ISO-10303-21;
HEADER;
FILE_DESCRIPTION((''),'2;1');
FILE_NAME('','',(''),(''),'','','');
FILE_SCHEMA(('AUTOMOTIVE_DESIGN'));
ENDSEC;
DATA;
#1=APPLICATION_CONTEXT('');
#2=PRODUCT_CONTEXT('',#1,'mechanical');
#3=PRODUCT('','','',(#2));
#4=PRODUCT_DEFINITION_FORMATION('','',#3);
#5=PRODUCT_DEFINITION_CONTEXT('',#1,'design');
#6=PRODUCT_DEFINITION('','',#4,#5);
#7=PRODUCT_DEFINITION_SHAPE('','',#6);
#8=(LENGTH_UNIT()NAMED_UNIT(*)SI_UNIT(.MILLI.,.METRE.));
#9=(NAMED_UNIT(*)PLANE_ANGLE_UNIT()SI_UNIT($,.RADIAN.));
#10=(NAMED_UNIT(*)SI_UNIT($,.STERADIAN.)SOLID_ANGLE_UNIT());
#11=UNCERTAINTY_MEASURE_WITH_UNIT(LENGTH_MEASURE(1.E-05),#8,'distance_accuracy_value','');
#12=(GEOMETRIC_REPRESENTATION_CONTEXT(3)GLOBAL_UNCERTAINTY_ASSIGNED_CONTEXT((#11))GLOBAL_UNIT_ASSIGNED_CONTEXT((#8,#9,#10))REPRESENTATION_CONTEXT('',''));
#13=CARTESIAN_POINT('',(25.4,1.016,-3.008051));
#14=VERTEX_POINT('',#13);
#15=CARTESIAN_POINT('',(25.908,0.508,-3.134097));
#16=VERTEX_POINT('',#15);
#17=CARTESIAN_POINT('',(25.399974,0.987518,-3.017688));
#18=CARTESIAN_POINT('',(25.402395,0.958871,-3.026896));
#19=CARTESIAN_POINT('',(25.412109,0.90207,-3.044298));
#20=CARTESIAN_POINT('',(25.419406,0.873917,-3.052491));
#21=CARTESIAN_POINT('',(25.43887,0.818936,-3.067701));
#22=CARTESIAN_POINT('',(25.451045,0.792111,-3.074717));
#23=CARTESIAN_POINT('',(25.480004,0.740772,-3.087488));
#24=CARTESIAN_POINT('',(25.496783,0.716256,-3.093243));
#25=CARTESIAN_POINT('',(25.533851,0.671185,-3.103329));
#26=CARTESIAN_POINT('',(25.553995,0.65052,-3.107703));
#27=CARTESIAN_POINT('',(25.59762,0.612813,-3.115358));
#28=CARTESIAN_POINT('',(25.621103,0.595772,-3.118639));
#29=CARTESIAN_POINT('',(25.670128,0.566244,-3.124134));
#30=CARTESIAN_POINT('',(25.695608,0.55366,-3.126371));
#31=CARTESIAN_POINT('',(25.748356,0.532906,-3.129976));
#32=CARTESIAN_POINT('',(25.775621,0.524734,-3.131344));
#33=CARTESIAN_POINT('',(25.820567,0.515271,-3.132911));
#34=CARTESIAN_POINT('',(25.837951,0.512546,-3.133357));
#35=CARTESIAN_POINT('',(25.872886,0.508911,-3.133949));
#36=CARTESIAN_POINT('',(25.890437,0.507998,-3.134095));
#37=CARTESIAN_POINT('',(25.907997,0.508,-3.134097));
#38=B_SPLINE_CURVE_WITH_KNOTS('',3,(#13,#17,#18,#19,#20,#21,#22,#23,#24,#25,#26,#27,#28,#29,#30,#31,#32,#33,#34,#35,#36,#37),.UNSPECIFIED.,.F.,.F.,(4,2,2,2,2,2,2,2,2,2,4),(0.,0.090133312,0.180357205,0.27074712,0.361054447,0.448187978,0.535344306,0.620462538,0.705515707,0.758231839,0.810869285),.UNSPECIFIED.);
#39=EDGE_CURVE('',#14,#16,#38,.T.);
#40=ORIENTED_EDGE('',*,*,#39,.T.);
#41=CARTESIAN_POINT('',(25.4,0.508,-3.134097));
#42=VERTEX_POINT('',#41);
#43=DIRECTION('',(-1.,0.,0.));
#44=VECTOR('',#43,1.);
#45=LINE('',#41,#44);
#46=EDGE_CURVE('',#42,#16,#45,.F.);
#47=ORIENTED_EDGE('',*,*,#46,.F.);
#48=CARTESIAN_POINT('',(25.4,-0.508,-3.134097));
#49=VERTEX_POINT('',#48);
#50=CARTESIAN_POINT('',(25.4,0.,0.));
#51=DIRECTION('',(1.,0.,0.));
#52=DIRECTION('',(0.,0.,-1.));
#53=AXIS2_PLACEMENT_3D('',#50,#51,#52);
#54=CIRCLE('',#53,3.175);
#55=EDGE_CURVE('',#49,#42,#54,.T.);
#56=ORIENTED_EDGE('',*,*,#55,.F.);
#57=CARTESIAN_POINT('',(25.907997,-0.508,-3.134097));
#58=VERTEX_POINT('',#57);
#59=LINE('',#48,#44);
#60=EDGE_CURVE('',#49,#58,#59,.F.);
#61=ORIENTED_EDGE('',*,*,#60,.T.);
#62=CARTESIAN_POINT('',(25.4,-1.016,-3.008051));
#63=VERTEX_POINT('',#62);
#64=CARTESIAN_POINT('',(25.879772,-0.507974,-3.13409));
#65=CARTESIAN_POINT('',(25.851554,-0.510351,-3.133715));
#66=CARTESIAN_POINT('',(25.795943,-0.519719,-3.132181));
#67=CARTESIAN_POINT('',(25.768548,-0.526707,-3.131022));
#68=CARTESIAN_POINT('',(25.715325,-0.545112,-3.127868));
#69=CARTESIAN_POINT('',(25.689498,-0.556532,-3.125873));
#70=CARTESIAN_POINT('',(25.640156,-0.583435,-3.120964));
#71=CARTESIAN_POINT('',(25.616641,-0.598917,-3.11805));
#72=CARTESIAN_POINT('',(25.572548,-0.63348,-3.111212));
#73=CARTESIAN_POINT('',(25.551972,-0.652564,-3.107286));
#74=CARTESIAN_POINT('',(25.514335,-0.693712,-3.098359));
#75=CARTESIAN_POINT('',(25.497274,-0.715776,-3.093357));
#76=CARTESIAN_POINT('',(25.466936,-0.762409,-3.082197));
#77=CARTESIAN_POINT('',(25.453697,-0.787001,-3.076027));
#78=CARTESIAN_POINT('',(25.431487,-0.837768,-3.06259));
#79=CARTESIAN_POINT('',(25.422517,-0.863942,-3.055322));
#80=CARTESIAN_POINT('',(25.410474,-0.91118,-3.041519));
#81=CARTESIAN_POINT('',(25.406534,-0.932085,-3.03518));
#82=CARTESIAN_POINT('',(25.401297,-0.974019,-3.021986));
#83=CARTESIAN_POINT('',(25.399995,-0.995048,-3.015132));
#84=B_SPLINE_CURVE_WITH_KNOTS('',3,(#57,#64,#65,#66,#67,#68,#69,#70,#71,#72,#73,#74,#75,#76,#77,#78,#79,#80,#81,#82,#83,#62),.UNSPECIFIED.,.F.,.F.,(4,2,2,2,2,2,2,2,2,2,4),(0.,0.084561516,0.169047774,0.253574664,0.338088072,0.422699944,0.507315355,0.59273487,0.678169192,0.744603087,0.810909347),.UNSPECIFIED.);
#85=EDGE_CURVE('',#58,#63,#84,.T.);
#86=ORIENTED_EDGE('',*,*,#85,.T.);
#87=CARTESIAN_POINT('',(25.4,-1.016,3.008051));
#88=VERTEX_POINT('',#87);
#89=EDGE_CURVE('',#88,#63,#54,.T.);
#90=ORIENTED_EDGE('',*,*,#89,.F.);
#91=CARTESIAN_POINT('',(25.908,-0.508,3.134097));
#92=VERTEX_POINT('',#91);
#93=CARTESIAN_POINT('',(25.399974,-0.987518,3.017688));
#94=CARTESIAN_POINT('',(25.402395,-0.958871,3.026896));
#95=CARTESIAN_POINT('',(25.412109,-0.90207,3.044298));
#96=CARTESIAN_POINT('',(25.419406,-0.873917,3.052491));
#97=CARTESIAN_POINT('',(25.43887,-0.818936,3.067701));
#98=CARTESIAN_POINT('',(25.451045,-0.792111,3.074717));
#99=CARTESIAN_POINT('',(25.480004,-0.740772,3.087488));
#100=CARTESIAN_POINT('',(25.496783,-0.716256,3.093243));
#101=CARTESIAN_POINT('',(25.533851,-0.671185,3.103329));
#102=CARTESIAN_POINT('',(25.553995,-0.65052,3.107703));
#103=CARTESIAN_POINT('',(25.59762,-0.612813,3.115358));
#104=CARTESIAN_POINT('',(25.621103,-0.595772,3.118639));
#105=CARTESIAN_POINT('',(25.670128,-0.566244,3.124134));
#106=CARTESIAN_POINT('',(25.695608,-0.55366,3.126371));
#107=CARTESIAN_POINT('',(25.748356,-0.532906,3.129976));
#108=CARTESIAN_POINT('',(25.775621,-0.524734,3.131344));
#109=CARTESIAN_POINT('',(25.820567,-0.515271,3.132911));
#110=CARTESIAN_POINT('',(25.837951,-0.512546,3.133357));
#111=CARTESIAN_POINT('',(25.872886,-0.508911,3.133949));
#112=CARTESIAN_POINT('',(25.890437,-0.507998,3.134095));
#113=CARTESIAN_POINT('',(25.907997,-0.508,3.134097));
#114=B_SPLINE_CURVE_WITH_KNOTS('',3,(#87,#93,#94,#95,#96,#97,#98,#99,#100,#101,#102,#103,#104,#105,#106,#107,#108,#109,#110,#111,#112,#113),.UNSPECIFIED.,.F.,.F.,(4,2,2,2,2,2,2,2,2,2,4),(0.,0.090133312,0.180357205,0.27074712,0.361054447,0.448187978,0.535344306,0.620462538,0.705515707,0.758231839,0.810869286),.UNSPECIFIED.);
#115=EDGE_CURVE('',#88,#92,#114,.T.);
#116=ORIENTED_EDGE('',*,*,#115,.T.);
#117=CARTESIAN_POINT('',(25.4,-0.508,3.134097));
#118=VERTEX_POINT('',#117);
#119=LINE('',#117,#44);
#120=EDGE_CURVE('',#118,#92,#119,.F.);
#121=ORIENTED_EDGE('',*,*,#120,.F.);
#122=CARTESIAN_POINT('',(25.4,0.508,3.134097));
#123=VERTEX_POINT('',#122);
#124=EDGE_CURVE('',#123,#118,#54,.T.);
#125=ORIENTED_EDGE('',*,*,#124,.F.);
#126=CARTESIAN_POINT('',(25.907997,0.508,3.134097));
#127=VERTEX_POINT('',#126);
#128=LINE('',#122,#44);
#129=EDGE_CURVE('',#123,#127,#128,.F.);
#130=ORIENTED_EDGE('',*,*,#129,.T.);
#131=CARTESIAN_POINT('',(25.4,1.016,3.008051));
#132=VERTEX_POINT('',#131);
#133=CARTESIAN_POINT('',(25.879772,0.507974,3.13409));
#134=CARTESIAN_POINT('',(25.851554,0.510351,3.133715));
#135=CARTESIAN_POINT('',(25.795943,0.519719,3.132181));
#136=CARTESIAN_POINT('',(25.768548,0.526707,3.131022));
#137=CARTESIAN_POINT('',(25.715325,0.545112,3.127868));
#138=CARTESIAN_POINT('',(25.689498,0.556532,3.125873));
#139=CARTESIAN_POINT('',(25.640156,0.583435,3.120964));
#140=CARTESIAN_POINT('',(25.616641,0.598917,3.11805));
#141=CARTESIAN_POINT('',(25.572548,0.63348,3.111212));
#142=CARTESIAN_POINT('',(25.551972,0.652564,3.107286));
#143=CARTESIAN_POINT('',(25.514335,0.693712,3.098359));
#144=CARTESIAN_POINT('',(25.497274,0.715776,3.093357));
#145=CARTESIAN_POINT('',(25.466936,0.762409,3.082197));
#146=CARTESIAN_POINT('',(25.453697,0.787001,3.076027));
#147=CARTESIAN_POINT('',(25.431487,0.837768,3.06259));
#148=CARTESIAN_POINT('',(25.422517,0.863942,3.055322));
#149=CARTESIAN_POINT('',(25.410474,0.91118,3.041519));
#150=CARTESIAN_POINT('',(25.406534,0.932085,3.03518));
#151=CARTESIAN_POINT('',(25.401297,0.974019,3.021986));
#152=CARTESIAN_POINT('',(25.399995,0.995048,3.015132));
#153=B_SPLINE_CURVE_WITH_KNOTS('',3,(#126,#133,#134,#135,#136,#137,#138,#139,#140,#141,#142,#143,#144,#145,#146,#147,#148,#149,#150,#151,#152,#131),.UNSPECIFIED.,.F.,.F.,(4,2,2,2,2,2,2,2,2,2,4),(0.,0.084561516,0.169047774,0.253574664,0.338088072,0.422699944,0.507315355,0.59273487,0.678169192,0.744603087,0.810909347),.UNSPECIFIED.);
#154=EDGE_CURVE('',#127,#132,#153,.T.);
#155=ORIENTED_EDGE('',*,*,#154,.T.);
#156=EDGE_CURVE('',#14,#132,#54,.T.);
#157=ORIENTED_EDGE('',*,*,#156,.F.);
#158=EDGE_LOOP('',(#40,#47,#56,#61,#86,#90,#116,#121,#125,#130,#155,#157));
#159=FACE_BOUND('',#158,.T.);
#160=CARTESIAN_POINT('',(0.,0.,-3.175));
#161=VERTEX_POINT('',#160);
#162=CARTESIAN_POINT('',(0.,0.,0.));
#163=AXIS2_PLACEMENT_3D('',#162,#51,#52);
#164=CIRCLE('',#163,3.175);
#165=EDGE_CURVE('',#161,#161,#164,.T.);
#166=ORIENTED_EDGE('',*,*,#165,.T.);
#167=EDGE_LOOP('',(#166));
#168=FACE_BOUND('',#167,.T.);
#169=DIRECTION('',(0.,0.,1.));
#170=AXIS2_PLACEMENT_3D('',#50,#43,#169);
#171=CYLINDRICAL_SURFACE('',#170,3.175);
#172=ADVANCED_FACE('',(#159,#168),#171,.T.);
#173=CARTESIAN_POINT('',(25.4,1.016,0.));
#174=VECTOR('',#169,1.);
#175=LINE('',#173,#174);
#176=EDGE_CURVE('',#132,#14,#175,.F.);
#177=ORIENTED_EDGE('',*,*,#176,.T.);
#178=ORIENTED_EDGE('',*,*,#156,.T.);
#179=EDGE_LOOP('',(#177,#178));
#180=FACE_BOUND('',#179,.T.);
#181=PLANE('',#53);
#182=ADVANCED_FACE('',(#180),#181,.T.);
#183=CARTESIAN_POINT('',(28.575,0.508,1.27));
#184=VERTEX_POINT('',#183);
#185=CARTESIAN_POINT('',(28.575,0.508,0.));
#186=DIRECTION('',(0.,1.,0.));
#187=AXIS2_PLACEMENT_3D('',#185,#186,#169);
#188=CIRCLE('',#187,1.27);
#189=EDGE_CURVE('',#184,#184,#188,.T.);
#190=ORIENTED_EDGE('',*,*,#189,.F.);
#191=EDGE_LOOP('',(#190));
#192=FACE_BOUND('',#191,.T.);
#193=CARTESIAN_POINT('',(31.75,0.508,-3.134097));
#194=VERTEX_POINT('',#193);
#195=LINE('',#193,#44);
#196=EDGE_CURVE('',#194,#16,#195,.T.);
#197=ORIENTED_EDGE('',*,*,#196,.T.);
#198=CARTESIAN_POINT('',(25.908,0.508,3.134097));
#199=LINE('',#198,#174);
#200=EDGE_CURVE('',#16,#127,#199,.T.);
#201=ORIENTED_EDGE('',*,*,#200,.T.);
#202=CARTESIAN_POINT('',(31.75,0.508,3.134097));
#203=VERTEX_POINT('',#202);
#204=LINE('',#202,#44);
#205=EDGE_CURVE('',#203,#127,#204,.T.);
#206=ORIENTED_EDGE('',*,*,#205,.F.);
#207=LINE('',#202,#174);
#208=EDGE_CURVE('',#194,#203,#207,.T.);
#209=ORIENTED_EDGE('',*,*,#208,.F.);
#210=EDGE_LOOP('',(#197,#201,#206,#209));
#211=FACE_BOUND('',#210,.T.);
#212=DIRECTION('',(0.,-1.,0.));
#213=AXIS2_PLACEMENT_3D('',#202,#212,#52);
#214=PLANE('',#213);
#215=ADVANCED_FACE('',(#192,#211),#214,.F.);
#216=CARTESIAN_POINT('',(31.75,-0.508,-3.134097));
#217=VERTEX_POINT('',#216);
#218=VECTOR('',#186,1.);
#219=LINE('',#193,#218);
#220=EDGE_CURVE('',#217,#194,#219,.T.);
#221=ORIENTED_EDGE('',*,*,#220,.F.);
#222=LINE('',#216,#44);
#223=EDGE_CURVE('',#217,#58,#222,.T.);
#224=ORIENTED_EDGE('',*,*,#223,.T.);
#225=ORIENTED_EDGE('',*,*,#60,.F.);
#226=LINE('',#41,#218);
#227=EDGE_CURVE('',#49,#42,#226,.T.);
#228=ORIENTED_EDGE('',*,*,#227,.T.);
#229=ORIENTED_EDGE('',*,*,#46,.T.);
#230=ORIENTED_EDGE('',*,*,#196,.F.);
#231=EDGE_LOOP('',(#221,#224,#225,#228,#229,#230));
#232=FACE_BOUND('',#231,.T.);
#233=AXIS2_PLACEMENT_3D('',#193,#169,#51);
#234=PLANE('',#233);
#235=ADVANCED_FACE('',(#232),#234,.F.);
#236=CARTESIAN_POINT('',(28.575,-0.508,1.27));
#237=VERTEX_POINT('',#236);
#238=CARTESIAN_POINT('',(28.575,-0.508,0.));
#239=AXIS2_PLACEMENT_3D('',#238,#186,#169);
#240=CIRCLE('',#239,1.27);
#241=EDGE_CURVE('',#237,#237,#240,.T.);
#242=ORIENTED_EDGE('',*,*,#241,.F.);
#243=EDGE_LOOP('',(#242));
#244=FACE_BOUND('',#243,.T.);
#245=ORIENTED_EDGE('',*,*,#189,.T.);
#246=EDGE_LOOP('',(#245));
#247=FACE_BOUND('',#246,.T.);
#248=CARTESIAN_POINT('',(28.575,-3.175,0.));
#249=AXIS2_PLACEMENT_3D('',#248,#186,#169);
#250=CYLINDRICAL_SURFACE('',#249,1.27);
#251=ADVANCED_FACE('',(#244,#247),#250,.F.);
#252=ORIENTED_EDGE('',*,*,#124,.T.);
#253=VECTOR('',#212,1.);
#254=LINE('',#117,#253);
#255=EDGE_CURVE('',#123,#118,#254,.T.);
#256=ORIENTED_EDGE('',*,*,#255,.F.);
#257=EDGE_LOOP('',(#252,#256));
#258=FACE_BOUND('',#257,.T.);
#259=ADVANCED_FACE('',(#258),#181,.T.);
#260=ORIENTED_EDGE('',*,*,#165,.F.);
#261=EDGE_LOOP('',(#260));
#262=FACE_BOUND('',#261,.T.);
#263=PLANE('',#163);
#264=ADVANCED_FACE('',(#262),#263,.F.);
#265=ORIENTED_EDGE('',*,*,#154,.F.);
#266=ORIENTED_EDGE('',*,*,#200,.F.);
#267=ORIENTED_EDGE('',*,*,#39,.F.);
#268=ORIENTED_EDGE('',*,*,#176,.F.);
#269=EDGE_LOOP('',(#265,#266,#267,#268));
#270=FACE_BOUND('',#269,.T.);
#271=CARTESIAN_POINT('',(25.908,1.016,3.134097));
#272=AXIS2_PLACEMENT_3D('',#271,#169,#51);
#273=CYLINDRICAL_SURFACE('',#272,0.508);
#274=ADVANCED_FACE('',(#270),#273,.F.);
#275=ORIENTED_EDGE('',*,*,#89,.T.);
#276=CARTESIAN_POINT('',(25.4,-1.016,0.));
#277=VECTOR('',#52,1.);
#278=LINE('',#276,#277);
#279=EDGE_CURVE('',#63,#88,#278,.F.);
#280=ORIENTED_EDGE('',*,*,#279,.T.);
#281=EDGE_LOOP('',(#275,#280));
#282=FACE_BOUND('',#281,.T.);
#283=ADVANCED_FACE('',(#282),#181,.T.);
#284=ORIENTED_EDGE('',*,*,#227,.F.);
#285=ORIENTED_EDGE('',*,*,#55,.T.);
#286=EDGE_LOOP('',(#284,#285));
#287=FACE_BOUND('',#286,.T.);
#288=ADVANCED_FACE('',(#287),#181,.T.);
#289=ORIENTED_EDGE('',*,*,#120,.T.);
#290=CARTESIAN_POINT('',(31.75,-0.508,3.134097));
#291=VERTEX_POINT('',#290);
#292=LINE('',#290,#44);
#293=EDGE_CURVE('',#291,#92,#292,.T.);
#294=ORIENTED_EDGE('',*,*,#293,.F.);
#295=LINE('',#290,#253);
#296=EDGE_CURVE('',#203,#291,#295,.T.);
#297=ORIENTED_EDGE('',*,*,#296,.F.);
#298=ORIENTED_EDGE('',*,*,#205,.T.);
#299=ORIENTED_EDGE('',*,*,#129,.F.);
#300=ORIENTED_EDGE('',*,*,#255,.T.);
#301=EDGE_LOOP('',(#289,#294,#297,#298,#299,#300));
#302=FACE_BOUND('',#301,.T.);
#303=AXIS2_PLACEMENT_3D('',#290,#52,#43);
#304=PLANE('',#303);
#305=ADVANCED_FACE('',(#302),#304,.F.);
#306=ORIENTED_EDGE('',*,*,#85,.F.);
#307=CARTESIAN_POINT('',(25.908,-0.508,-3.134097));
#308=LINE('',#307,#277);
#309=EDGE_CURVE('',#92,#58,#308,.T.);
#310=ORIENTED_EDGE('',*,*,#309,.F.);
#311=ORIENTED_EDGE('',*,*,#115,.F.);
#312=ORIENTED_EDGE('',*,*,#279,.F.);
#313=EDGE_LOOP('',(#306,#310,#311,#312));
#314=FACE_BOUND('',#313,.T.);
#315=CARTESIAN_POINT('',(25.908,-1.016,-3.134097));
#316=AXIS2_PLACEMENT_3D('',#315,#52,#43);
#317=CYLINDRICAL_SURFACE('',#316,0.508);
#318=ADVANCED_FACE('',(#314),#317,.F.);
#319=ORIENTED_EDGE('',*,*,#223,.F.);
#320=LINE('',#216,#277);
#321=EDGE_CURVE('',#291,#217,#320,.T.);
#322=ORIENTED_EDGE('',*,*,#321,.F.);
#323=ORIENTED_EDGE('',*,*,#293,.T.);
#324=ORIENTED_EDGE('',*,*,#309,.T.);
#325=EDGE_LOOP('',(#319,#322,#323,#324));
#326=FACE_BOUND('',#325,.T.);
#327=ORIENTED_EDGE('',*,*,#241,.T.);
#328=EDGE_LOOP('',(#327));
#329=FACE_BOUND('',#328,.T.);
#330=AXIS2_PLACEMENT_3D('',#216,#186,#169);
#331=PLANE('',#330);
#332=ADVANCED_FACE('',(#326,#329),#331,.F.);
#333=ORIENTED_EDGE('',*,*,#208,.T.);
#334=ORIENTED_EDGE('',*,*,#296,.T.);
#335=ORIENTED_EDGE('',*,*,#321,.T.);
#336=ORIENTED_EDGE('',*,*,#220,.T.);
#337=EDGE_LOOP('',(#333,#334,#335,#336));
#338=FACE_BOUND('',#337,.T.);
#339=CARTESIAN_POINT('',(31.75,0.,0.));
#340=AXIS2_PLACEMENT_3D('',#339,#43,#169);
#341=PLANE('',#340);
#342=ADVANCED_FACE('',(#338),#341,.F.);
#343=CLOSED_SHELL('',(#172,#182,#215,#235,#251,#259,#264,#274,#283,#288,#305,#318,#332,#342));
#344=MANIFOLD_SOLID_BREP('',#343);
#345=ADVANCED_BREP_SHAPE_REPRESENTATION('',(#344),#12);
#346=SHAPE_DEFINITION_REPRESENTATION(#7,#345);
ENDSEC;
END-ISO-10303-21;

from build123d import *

# Parameters (mm, degrees)
SKETCH1_R           = 3.175
BOSS_EXTRUDE1_DEPTH = 25.4
SKETCH2_W           = 6.268193042
SKETCH2_H           = 1.016
BOSS_EXTRUDE2_DEPTH = 6.35
SKETCH3_R           = 1.27
CUT_EXTRUDE1_DEPTH  = 33.120205697
FILLET1_R           = 0.508


with BuildPart() as part:
    # Sketch1 → Boss-Extrude1 (new body)
    with BuildSketch(Plane(origin=(0, 0, 0), x_dir=(0, 0, -1), z_dir=(1, 0, 0))):
        Circle(SKETCH1_R)
    extrude(amount=BOSS_EXTRUDE1_DEPTH)

    # Sketch2 → Boss-Extrude2 (add)
    with BuildSketch(Plane(origin=(25.4, 0, 0), x_dir=(0, 0, -1), z_dir=(1, 0, 0))):
        Rectangle(SKETCH2_W, SKETCH2_H)
    extrude(amount=BOSS_EXTRUDE2_DEPTH)

    # Sketch3 → Cut-Extrude1 (cut, through all)
    with BuildSketch(Plane(origin=(0, 0.508, 0), x_dir=(1, 0, 0), z_dir=(0, 1, 0))):
        with Locations(Location((28.575, 0, 0), (0, 0, 270))):
            Circle(SKETCH3_R)
    extrude(amount=-CUT_EXTRUDE1_DEPTH, mode=Mode.SUBTRACT)

    # Fillet1
    # the kernel refuses this fillet: 0.508 mm, written as the material it adds along each edge
    with BuildSketch(Plane(origin=(25.4, -0.508, -3.134096521), x_dir=(0, -1, 0), z_dir=(0, 0, 1))) as fillet1_piece_1_section:
        with BuildLine():
            CenterArc((FILLET1_R, FILLET1_R), FILLET1_R, 180, 90)
            Line((0, FILLET1_R), (0, 0))
            Line((0, 0), (FILLET1_R, 0))
        make_face()
    fillet1_piece_1 = extrude(amount=6.268193041, mode=Mode.PRIVATE)
    fillet1_piece_1 = fillet1_piece_1 & Plane(origin=(25.515488837, 0, 0), x_dir=(0, 0, -1), z_dir=(-1, 0, 0)) * Cylinder(3.175, 15, mode=Mode.PRIVATE)
    add(fillet1_piece_1)
    with BuildSketch(Plane(origin=(25.4, 0.508, 3.134096521), x_dir=(0, 1, 0), z_dir=(0, 0, -1))) as fillet1_piece_2_section:
        with BuildLine():
            CenterArc((FILLET1_R, FILLET1_R), FILLET1_R, 180, 90)
            Line((0, FILLET1_R), (0, 0))
            Line((0, 0), (FILLET1_R, 0))
        make_face()
    fillet1_piece_2 = extrude(amount=6.268193041, mode=Mode.PRIVATE)
    fillet1_piece_2 = fillet1_piece_2 & Plane(origin=(25.515488837, 0, 0), x_dir=(0, 0, -1), z_dir=(-1, 0, 0)) * Cylinder(3.175, 15, mode=Mode.PRIVATE)
    add(fillet1_piece_2)


solid = part.part
